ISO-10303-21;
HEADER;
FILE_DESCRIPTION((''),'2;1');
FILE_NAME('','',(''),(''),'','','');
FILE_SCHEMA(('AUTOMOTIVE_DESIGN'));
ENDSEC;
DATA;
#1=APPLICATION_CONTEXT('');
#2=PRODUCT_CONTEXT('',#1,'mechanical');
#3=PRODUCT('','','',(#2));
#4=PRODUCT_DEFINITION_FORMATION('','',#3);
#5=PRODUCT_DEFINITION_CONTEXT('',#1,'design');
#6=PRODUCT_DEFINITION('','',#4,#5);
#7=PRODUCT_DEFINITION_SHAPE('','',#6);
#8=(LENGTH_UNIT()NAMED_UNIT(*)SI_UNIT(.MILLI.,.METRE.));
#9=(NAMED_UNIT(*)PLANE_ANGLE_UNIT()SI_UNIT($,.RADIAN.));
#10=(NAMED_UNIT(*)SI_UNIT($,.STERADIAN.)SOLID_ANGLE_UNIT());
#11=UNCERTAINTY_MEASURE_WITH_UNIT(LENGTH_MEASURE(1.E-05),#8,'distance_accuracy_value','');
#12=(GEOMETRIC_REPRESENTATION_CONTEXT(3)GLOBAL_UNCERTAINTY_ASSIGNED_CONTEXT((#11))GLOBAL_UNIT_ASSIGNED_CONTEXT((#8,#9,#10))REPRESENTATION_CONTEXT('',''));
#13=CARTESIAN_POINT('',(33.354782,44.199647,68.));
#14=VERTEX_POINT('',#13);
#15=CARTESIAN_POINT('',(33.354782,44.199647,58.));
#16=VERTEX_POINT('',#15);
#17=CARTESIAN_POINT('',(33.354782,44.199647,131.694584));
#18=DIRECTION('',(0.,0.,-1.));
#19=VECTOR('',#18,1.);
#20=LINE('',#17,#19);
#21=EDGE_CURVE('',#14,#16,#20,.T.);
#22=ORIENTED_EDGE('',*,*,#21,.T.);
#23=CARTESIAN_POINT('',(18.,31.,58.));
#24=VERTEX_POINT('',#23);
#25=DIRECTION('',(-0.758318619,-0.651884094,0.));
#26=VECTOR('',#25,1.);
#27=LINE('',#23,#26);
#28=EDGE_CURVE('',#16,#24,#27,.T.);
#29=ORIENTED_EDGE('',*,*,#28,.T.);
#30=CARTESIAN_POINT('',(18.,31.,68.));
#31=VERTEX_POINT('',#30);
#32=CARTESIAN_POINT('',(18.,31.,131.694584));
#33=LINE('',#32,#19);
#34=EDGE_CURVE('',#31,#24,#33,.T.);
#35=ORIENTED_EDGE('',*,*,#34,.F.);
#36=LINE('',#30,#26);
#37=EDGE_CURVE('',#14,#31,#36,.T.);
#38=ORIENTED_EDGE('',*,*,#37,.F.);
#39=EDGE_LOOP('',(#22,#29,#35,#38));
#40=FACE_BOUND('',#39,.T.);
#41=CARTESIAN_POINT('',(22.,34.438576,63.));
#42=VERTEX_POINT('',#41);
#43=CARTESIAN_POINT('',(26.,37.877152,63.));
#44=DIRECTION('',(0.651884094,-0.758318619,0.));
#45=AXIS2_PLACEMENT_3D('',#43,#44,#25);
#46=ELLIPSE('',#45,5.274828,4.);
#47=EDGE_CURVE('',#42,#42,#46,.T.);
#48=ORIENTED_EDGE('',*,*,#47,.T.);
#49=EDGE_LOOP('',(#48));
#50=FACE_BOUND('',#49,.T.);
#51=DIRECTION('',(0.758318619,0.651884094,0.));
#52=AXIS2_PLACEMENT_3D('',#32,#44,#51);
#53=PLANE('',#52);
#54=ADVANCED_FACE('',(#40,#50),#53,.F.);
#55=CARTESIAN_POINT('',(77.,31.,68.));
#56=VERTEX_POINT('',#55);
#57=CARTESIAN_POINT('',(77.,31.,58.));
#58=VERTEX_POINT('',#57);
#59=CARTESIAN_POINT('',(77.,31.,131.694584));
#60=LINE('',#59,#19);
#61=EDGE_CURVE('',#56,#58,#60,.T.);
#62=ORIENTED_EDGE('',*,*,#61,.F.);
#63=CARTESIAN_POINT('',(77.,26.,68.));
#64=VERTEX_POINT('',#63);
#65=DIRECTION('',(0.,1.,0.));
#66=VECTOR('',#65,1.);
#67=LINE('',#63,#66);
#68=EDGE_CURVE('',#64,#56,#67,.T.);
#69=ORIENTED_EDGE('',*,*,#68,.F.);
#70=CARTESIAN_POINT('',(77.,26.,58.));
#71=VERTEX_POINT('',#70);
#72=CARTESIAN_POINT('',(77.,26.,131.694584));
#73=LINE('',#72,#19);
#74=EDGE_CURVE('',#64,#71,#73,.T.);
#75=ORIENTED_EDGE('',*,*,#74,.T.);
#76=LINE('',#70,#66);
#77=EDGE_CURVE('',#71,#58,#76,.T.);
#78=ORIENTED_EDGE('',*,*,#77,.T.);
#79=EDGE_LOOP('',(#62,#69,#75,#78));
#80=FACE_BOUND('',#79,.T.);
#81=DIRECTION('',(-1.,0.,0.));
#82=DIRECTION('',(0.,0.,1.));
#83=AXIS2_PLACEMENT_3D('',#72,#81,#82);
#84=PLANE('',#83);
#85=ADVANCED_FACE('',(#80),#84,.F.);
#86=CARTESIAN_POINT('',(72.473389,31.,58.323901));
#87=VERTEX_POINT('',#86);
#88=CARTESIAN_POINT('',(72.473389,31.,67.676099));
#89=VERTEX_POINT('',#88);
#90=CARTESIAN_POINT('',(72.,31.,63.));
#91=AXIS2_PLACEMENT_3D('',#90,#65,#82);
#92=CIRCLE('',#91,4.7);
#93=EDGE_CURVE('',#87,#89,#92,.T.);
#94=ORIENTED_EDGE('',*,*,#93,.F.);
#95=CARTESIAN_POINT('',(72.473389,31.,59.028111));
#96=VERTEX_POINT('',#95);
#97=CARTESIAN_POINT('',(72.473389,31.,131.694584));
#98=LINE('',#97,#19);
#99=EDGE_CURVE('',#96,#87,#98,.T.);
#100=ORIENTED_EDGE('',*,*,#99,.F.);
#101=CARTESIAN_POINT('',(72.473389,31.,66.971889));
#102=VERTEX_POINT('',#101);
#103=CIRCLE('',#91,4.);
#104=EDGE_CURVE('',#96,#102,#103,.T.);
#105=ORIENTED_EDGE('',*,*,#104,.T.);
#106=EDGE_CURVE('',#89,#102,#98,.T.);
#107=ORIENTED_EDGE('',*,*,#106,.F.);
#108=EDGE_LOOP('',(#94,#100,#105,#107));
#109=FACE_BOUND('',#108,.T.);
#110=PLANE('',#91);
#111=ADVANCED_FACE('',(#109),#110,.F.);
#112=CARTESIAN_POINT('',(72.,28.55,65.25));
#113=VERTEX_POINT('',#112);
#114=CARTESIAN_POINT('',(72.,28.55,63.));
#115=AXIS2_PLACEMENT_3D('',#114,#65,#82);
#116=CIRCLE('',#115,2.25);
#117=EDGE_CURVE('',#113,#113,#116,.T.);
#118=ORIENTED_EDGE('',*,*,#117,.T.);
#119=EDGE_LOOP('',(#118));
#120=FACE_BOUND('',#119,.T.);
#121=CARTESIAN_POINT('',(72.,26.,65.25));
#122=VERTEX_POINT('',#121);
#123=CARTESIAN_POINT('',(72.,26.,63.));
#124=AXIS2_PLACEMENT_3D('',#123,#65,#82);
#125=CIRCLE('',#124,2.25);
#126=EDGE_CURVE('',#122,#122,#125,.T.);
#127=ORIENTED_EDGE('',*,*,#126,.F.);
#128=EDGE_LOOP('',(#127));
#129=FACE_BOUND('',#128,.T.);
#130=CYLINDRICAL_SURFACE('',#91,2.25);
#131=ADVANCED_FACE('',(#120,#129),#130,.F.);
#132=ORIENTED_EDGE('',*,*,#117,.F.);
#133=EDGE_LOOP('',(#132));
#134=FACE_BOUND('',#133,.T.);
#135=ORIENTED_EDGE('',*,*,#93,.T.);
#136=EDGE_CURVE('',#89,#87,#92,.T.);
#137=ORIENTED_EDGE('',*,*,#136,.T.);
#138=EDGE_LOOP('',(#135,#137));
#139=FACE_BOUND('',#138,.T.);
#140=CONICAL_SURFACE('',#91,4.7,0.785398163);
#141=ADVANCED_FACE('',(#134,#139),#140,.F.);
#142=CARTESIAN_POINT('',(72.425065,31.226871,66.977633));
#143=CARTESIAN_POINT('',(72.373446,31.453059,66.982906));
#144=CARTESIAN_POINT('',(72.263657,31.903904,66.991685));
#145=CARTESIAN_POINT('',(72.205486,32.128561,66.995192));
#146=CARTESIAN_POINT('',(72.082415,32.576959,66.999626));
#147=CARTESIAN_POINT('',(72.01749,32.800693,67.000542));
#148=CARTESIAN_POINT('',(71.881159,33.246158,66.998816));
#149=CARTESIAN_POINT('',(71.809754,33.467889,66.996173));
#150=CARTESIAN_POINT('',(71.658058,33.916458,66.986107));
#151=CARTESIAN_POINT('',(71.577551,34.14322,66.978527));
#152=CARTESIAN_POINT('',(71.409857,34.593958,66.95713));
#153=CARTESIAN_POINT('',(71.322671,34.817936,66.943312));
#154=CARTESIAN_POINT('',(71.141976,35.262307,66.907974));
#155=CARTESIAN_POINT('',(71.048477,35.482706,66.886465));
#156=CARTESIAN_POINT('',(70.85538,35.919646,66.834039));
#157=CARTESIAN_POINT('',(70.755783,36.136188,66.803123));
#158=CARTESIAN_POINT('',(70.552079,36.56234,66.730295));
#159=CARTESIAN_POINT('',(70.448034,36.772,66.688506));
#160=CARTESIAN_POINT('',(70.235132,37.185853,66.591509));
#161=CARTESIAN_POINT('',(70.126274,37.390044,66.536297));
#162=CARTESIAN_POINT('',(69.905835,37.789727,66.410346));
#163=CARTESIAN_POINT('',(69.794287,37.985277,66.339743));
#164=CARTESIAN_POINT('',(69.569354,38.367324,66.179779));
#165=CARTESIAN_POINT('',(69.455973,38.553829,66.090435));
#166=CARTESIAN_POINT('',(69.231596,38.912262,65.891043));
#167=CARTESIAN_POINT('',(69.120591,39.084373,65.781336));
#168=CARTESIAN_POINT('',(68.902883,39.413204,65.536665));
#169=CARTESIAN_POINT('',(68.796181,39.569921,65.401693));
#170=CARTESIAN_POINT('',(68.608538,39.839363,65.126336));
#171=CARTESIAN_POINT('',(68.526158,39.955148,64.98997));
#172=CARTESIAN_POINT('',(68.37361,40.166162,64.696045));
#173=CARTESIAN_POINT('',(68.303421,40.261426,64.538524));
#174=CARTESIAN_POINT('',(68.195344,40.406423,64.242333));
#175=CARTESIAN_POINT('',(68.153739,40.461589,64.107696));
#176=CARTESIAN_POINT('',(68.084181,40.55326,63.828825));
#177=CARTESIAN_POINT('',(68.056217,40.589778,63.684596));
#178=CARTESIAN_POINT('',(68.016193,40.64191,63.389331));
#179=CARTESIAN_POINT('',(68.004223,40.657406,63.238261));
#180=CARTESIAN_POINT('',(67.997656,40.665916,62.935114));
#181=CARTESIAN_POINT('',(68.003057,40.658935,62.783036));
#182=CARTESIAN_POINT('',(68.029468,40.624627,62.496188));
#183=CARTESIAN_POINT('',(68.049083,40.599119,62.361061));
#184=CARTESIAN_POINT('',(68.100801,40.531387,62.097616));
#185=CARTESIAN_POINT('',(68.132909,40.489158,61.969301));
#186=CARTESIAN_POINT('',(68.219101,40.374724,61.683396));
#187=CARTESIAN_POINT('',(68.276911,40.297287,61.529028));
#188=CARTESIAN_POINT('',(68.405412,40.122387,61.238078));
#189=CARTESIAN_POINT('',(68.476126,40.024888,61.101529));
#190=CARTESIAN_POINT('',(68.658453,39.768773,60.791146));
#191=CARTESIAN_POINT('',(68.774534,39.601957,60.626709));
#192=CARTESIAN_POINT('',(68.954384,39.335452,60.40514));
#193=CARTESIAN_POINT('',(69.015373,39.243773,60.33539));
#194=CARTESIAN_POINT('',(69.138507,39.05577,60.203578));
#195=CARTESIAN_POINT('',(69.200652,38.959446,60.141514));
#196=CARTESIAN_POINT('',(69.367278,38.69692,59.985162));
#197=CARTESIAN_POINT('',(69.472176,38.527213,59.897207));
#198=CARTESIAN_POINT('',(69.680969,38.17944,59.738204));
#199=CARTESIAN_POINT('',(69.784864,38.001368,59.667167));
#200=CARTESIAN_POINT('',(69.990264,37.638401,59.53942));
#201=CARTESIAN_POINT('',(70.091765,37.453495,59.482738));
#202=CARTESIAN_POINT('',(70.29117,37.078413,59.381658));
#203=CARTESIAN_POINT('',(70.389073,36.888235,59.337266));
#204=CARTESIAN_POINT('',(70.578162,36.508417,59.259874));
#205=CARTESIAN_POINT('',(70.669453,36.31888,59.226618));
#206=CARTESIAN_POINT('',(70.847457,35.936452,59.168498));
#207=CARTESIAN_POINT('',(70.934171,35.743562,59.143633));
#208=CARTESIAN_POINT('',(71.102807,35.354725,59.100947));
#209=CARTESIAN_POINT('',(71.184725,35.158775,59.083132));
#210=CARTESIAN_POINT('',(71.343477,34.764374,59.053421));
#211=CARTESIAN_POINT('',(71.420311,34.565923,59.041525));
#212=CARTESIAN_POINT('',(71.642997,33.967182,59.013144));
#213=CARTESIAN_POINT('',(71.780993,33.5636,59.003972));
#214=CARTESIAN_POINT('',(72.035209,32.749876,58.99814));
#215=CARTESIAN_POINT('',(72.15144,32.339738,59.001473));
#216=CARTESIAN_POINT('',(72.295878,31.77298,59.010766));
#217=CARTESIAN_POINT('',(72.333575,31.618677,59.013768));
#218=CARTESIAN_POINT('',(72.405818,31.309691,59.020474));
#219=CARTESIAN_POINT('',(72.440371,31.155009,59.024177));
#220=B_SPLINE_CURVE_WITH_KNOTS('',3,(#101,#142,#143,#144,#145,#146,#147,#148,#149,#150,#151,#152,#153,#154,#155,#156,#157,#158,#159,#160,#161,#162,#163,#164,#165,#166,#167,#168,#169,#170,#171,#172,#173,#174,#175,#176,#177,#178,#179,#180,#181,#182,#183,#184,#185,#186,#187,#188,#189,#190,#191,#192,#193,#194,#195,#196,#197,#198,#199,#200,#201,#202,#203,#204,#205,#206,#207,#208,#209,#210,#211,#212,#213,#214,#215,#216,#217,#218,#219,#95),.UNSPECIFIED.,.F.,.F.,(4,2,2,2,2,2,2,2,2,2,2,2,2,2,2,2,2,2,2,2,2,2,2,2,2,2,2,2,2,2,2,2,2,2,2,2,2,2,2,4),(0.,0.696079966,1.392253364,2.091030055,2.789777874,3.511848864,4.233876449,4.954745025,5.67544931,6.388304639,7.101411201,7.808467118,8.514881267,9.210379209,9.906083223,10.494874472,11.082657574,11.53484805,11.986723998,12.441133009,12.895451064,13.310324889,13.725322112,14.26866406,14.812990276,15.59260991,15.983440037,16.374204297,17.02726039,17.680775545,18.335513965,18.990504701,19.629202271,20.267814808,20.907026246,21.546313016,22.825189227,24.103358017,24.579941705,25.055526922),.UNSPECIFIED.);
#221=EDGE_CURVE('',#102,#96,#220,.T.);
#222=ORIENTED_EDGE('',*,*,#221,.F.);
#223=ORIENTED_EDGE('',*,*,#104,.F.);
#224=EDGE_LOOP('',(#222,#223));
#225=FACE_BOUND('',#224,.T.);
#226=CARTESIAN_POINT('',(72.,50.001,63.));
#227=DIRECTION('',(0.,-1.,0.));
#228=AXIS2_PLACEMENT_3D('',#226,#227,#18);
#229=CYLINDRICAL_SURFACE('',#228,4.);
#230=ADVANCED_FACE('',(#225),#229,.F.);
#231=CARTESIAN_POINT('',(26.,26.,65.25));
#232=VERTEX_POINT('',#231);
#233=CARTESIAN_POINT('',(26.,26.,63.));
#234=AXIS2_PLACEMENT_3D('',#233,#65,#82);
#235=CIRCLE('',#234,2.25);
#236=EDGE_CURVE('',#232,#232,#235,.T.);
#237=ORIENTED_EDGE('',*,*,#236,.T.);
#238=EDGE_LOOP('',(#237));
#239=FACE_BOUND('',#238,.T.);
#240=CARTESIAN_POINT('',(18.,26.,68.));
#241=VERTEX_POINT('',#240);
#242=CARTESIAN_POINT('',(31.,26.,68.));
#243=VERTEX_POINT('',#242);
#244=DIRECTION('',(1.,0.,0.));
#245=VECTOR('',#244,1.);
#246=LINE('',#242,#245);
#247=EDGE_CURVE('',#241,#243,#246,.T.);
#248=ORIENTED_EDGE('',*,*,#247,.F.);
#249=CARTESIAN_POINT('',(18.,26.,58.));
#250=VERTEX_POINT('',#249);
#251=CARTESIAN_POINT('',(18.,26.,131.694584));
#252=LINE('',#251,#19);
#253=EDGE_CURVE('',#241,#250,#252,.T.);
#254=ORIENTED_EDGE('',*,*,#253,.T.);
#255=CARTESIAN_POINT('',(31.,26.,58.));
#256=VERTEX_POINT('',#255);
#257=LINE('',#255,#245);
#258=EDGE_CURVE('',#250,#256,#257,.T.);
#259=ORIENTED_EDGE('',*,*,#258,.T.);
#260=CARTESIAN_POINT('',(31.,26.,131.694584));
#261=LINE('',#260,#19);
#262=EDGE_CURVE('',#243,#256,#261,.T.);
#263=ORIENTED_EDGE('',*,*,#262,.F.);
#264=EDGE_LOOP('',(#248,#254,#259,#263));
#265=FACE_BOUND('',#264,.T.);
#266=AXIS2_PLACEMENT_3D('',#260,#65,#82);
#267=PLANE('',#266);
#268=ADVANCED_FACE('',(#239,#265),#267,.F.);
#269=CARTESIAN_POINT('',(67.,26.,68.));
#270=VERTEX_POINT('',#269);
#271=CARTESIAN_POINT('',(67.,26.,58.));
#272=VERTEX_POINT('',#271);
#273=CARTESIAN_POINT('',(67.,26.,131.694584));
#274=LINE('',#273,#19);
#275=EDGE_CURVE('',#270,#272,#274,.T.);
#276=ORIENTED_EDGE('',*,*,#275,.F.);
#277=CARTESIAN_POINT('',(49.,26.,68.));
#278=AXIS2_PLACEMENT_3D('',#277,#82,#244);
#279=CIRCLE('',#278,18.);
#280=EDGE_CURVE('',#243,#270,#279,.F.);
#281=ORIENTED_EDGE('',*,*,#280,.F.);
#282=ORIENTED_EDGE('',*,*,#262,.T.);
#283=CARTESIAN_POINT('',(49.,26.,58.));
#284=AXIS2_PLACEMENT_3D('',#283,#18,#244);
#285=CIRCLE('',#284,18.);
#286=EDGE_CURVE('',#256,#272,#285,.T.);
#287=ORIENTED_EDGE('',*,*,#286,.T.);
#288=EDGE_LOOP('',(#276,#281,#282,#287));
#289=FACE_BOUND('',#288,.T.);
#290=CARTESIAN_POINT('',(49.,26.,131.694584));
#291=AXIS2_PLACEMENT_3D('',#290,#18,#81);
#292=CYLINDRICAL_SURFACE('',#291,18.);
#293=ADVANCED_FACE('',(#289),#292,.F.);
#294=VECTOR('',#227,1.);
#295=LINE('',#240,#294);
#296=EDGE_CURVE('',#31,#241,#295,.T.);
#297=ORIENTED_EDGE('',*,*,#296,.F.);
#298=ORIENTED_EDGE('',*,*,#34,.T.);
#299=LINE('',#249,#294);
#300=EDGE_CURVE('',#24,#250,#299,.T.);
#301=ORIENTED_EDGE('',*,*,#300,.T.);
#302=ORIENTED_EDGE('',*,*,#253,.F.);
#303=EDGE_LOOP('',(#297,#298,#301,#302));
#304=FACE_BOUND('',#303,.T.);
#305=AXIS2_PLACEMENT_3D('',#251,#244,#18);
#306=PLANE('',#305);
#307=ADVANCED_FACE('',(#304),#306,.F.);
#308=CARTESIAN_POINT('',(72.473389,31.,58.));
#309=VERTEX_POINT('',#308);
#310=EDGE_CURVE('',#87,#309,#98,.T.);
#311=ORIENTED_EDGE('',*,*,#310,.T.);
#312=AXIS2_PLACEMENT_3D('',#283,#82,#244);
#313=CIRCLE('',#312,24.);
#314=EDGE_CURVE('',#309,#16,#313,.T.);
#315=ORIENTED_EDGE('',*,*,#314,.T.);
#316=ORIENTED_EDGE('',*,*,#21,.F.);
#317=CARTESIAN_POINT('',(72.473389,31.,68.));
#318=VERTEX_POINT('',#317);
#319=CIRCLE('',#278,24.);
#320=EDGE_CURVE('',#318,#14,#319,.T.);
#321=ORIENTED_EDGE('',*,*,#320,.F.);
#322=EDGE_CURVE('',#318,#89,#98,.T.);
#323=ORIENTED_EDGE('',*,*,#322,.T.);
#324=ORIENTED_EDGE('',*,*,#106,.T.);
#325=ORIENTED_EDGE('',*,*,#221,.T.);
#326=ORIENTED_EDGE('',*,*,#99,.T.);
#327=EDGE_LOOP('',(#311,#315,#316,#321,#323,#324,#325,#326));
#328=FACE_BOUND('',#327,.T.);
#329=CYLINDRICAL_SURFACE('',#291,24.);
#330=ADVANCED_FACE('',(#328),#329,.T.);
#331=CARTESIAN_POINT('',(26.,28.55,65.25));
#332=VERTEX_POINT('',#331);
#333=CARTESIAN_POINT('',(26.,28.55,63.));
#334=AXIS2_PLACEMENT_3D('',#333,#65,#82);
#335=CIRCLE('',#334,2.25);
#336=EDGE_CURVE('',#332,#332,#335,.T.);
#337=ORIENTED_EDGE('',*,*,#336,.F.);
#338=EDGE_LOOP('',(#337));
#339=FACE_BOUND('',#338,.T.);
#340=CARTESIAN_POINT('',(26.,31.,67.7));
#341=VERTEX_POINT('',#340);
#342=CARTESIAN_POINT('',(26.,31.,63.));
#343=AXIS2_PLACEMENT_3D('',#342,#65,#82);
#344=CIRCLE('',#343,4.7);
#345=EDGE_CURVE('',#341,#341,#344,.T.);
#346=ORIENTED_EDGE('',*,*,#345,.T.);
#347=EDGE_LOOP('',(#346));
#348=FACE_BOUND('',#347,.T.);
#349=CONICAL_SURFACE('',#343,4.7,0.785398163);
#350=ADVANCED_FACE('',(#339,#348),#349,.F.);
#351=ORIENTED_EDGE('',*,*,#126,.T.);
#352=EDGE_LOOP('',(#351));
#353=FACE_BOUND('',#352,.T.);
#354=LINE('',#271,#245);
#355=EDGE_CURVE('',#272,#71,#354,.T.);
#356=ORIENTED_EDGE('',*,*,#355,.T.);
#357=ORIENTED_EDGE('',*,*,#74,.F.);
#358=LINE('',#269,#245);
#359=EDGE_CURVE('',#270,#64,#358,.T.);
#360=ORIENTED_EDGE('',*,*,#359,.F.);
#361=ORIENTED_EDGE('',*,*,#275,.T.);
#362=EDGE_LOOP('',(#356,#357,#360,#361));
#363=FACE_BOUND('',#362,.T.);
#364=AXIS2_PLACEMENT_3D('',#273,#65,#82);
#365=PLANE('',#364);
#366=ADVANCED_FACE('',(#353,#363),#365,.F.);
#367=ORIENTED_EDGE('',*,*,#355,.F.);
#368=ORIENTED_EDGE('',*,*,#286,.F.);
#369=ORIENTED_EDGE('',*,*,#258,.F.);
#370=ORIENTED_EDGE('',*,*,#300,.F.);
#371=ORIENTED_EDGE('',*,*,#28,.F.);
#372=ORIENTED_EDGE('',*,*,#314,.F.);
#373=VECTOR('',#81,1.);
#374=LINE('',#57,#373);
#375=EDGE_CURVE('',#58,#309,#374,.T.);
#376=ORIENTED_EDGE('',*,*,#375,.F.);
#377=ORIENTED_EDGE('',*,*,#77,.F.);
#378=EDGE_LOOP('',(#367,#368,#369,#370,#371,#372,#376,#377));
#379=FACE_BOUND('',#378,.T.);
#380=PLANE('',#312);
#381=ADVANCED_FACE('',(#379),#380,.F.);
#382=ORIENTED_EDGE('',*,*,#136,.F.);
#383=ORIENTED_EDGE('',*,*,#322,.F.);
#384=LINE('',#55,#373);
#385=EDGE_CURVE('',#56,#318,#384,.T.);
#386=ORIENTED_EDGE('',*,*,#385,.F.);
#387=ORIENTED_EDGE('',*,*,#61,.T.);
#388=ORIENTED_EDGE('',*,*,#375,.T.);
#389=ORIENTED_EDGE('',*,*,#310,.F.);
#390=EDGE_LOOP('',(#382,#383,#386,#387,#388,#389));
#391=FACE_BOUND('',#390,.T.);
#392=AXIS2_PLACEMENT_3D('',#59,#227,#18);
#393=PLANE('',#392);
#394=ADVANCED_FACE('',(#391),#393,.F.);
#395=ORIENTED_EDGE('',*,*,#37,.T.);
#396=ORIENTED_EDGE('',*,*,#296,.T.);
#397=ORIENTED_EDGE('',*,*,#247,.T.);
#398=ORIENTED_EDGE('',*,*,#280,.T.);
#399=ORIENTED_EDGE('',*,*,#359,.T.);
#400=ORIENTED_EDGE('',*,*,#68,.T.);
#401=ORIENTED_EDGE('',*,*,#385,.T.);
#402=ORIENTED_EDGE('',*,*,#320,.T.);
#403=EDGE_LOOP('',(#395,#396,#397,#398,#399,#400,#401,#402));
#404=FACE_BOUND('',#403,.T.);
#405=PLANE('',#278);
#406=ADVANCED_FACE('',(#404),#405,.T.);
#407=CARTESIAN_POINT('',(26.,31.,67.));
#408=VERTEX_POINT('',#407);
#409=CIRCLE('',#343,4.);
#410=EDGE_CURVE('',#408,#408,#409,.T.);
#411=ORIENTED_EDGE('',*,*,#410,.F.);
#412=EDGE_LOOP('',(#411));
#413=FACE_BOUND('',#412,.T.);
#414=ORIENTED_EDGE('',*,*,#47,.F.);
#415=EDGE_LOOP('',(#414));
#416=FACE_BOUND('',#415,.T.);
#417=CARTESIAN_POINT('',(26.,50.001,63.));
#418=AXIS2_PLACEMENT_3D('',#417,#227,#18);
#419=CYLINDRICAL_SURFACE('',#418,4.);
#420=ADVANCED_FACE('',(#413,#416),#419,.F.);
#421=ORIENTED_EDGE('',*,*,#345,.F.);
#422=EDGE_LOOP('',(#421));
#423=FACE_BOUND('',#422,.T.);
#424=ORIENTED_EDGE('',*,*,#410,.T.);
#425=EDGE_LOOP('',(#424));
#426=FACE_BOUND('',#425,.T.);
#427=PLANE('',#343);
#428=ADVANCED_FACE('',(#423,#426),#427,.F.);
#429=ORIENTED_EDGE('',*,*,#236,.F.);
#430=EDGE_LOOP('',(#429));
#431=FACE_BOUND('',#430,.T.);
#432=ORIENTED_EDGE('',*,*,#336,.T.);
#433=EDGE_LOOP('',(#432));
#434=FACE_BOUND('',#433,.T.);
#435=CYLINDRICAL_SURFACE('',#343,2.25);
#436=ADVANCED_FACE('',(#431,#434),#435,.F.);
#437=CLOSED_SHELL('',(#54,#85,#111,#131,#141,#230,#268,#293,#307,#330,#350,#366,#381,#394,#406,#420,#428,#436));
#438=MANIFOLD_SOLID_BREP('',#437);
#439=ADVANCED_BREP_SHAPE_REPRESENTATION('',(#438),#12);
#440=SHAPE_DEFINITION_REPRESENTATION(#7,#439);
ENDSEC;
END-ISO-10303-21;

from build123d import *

# Parameters (mm, degrees)
EXTRUDE_1_DEPTH     = 10
CUT_EXTRUDE_1_REACH = 106.47
SKETCH_2_R          = 4


# Read off the part's stored shape, not the designer's step: 高级异型孔1
with BuildPart() as part:
    # 草图1 → 凸台-拉伸1 (new body)
    with BuildSketch(Plane.XY.offset(58)):
        with BuildLine():
            Line((31, 26), (18, 26))
            Line((18, 26), (18, 31))
            Line((18, 31), (33.354781752, 44.199646864))
            ThreePointArc((33.354781752, 44.199646864), (56.673182808, 48.74032246), (72.473389189, 31))
            Line((72.473389189, 31), (77, 31))
            Line((77, 31), (77, 26))
            Line((77, 26), (67, 26))
            ThreePointArc((67, 26), (49, 44), (31, 26))
        make_face()
    extrude(amount=EXTRUDE_1_DEPTH)

    # 草图2 → 切除-拉伸1 (cut, up to next)
    with BuildSketch(Plane(origin=(0, 31, 0), x_dir=(1, 0, 0), z_dir=(0, 1, 0)), mode=Mode.PRIVATE) as cut_extrude_1_sk1:
        with Locations(Location((26, -63, 0), (0, 0, 180))):
            Circle(SKETCH_2_R)
    cut_extrude_1_tool1 = extrude(cut_extrude_1_sk1.sketch, amount=CUT_EXTRUDE_1_REACH, mode=Mode.PRIVATE) & part.part
    # 草图2 → 切除-拉伸1 (cut, up to next)
    with BuildSketch(Plane(origin=(0, 31, 0), x_dir=(1, 0, 0), z_dir=(0, 1, 0)), mode=Mode.PRIVATE) as cut_extrude_1_sk2:
        with Locations((72, -63)):
            Circle(SKETCH_2_R)
    cut_extrude_1_tool2 = extrude(cut_extrude_1_sk2.sketch, amount=CUT_EXTRUDE_1_REACH, mode=Mode.PRIVATE) & part.part
    add(cut_extrude_1_tool1.solids().sort_by_distance((26, 31, 63))[0], mode=Mode.SUBTRACT)
    add(cut_extrude_1_tool2.solids().sort_by_distance((72, 31, 63))[0], mode=Mode.SUBTRACT)

    # 高级异型孔1 outline → 高级异型孔1 (revolve, cut)
    with BuildSketch(Plane(origin=(72, 0, 63), x_dir=(1, 0, 0), z_dir=(0, 0, 1))):
        Polygon((0, 26), (2.25, 26), (2.25, 28.55), (4.7, 31), (0, 31), align=None)
    revolve(axis=Axis((72, 0, 63), (0, 1, 0)), mode=Mode.SUBTRACT)

    # Other 1 2 outline → Other 1 2 (revolve, cut)
    with BuildSketch(Plane(origin=(26, 0, 63), x_dir=(1, 0, 0), z_dir=(0, 0, 1))):
        Polygon((4.7, 31), (0, 31), (0, 26), (2.25, 26), (2.25, 28.55), align=None)
    revolve(axis=Axis((26, 0, 63), (0, 1, 0)), mode=Mode.SUBTRACT)


solid = part.part
